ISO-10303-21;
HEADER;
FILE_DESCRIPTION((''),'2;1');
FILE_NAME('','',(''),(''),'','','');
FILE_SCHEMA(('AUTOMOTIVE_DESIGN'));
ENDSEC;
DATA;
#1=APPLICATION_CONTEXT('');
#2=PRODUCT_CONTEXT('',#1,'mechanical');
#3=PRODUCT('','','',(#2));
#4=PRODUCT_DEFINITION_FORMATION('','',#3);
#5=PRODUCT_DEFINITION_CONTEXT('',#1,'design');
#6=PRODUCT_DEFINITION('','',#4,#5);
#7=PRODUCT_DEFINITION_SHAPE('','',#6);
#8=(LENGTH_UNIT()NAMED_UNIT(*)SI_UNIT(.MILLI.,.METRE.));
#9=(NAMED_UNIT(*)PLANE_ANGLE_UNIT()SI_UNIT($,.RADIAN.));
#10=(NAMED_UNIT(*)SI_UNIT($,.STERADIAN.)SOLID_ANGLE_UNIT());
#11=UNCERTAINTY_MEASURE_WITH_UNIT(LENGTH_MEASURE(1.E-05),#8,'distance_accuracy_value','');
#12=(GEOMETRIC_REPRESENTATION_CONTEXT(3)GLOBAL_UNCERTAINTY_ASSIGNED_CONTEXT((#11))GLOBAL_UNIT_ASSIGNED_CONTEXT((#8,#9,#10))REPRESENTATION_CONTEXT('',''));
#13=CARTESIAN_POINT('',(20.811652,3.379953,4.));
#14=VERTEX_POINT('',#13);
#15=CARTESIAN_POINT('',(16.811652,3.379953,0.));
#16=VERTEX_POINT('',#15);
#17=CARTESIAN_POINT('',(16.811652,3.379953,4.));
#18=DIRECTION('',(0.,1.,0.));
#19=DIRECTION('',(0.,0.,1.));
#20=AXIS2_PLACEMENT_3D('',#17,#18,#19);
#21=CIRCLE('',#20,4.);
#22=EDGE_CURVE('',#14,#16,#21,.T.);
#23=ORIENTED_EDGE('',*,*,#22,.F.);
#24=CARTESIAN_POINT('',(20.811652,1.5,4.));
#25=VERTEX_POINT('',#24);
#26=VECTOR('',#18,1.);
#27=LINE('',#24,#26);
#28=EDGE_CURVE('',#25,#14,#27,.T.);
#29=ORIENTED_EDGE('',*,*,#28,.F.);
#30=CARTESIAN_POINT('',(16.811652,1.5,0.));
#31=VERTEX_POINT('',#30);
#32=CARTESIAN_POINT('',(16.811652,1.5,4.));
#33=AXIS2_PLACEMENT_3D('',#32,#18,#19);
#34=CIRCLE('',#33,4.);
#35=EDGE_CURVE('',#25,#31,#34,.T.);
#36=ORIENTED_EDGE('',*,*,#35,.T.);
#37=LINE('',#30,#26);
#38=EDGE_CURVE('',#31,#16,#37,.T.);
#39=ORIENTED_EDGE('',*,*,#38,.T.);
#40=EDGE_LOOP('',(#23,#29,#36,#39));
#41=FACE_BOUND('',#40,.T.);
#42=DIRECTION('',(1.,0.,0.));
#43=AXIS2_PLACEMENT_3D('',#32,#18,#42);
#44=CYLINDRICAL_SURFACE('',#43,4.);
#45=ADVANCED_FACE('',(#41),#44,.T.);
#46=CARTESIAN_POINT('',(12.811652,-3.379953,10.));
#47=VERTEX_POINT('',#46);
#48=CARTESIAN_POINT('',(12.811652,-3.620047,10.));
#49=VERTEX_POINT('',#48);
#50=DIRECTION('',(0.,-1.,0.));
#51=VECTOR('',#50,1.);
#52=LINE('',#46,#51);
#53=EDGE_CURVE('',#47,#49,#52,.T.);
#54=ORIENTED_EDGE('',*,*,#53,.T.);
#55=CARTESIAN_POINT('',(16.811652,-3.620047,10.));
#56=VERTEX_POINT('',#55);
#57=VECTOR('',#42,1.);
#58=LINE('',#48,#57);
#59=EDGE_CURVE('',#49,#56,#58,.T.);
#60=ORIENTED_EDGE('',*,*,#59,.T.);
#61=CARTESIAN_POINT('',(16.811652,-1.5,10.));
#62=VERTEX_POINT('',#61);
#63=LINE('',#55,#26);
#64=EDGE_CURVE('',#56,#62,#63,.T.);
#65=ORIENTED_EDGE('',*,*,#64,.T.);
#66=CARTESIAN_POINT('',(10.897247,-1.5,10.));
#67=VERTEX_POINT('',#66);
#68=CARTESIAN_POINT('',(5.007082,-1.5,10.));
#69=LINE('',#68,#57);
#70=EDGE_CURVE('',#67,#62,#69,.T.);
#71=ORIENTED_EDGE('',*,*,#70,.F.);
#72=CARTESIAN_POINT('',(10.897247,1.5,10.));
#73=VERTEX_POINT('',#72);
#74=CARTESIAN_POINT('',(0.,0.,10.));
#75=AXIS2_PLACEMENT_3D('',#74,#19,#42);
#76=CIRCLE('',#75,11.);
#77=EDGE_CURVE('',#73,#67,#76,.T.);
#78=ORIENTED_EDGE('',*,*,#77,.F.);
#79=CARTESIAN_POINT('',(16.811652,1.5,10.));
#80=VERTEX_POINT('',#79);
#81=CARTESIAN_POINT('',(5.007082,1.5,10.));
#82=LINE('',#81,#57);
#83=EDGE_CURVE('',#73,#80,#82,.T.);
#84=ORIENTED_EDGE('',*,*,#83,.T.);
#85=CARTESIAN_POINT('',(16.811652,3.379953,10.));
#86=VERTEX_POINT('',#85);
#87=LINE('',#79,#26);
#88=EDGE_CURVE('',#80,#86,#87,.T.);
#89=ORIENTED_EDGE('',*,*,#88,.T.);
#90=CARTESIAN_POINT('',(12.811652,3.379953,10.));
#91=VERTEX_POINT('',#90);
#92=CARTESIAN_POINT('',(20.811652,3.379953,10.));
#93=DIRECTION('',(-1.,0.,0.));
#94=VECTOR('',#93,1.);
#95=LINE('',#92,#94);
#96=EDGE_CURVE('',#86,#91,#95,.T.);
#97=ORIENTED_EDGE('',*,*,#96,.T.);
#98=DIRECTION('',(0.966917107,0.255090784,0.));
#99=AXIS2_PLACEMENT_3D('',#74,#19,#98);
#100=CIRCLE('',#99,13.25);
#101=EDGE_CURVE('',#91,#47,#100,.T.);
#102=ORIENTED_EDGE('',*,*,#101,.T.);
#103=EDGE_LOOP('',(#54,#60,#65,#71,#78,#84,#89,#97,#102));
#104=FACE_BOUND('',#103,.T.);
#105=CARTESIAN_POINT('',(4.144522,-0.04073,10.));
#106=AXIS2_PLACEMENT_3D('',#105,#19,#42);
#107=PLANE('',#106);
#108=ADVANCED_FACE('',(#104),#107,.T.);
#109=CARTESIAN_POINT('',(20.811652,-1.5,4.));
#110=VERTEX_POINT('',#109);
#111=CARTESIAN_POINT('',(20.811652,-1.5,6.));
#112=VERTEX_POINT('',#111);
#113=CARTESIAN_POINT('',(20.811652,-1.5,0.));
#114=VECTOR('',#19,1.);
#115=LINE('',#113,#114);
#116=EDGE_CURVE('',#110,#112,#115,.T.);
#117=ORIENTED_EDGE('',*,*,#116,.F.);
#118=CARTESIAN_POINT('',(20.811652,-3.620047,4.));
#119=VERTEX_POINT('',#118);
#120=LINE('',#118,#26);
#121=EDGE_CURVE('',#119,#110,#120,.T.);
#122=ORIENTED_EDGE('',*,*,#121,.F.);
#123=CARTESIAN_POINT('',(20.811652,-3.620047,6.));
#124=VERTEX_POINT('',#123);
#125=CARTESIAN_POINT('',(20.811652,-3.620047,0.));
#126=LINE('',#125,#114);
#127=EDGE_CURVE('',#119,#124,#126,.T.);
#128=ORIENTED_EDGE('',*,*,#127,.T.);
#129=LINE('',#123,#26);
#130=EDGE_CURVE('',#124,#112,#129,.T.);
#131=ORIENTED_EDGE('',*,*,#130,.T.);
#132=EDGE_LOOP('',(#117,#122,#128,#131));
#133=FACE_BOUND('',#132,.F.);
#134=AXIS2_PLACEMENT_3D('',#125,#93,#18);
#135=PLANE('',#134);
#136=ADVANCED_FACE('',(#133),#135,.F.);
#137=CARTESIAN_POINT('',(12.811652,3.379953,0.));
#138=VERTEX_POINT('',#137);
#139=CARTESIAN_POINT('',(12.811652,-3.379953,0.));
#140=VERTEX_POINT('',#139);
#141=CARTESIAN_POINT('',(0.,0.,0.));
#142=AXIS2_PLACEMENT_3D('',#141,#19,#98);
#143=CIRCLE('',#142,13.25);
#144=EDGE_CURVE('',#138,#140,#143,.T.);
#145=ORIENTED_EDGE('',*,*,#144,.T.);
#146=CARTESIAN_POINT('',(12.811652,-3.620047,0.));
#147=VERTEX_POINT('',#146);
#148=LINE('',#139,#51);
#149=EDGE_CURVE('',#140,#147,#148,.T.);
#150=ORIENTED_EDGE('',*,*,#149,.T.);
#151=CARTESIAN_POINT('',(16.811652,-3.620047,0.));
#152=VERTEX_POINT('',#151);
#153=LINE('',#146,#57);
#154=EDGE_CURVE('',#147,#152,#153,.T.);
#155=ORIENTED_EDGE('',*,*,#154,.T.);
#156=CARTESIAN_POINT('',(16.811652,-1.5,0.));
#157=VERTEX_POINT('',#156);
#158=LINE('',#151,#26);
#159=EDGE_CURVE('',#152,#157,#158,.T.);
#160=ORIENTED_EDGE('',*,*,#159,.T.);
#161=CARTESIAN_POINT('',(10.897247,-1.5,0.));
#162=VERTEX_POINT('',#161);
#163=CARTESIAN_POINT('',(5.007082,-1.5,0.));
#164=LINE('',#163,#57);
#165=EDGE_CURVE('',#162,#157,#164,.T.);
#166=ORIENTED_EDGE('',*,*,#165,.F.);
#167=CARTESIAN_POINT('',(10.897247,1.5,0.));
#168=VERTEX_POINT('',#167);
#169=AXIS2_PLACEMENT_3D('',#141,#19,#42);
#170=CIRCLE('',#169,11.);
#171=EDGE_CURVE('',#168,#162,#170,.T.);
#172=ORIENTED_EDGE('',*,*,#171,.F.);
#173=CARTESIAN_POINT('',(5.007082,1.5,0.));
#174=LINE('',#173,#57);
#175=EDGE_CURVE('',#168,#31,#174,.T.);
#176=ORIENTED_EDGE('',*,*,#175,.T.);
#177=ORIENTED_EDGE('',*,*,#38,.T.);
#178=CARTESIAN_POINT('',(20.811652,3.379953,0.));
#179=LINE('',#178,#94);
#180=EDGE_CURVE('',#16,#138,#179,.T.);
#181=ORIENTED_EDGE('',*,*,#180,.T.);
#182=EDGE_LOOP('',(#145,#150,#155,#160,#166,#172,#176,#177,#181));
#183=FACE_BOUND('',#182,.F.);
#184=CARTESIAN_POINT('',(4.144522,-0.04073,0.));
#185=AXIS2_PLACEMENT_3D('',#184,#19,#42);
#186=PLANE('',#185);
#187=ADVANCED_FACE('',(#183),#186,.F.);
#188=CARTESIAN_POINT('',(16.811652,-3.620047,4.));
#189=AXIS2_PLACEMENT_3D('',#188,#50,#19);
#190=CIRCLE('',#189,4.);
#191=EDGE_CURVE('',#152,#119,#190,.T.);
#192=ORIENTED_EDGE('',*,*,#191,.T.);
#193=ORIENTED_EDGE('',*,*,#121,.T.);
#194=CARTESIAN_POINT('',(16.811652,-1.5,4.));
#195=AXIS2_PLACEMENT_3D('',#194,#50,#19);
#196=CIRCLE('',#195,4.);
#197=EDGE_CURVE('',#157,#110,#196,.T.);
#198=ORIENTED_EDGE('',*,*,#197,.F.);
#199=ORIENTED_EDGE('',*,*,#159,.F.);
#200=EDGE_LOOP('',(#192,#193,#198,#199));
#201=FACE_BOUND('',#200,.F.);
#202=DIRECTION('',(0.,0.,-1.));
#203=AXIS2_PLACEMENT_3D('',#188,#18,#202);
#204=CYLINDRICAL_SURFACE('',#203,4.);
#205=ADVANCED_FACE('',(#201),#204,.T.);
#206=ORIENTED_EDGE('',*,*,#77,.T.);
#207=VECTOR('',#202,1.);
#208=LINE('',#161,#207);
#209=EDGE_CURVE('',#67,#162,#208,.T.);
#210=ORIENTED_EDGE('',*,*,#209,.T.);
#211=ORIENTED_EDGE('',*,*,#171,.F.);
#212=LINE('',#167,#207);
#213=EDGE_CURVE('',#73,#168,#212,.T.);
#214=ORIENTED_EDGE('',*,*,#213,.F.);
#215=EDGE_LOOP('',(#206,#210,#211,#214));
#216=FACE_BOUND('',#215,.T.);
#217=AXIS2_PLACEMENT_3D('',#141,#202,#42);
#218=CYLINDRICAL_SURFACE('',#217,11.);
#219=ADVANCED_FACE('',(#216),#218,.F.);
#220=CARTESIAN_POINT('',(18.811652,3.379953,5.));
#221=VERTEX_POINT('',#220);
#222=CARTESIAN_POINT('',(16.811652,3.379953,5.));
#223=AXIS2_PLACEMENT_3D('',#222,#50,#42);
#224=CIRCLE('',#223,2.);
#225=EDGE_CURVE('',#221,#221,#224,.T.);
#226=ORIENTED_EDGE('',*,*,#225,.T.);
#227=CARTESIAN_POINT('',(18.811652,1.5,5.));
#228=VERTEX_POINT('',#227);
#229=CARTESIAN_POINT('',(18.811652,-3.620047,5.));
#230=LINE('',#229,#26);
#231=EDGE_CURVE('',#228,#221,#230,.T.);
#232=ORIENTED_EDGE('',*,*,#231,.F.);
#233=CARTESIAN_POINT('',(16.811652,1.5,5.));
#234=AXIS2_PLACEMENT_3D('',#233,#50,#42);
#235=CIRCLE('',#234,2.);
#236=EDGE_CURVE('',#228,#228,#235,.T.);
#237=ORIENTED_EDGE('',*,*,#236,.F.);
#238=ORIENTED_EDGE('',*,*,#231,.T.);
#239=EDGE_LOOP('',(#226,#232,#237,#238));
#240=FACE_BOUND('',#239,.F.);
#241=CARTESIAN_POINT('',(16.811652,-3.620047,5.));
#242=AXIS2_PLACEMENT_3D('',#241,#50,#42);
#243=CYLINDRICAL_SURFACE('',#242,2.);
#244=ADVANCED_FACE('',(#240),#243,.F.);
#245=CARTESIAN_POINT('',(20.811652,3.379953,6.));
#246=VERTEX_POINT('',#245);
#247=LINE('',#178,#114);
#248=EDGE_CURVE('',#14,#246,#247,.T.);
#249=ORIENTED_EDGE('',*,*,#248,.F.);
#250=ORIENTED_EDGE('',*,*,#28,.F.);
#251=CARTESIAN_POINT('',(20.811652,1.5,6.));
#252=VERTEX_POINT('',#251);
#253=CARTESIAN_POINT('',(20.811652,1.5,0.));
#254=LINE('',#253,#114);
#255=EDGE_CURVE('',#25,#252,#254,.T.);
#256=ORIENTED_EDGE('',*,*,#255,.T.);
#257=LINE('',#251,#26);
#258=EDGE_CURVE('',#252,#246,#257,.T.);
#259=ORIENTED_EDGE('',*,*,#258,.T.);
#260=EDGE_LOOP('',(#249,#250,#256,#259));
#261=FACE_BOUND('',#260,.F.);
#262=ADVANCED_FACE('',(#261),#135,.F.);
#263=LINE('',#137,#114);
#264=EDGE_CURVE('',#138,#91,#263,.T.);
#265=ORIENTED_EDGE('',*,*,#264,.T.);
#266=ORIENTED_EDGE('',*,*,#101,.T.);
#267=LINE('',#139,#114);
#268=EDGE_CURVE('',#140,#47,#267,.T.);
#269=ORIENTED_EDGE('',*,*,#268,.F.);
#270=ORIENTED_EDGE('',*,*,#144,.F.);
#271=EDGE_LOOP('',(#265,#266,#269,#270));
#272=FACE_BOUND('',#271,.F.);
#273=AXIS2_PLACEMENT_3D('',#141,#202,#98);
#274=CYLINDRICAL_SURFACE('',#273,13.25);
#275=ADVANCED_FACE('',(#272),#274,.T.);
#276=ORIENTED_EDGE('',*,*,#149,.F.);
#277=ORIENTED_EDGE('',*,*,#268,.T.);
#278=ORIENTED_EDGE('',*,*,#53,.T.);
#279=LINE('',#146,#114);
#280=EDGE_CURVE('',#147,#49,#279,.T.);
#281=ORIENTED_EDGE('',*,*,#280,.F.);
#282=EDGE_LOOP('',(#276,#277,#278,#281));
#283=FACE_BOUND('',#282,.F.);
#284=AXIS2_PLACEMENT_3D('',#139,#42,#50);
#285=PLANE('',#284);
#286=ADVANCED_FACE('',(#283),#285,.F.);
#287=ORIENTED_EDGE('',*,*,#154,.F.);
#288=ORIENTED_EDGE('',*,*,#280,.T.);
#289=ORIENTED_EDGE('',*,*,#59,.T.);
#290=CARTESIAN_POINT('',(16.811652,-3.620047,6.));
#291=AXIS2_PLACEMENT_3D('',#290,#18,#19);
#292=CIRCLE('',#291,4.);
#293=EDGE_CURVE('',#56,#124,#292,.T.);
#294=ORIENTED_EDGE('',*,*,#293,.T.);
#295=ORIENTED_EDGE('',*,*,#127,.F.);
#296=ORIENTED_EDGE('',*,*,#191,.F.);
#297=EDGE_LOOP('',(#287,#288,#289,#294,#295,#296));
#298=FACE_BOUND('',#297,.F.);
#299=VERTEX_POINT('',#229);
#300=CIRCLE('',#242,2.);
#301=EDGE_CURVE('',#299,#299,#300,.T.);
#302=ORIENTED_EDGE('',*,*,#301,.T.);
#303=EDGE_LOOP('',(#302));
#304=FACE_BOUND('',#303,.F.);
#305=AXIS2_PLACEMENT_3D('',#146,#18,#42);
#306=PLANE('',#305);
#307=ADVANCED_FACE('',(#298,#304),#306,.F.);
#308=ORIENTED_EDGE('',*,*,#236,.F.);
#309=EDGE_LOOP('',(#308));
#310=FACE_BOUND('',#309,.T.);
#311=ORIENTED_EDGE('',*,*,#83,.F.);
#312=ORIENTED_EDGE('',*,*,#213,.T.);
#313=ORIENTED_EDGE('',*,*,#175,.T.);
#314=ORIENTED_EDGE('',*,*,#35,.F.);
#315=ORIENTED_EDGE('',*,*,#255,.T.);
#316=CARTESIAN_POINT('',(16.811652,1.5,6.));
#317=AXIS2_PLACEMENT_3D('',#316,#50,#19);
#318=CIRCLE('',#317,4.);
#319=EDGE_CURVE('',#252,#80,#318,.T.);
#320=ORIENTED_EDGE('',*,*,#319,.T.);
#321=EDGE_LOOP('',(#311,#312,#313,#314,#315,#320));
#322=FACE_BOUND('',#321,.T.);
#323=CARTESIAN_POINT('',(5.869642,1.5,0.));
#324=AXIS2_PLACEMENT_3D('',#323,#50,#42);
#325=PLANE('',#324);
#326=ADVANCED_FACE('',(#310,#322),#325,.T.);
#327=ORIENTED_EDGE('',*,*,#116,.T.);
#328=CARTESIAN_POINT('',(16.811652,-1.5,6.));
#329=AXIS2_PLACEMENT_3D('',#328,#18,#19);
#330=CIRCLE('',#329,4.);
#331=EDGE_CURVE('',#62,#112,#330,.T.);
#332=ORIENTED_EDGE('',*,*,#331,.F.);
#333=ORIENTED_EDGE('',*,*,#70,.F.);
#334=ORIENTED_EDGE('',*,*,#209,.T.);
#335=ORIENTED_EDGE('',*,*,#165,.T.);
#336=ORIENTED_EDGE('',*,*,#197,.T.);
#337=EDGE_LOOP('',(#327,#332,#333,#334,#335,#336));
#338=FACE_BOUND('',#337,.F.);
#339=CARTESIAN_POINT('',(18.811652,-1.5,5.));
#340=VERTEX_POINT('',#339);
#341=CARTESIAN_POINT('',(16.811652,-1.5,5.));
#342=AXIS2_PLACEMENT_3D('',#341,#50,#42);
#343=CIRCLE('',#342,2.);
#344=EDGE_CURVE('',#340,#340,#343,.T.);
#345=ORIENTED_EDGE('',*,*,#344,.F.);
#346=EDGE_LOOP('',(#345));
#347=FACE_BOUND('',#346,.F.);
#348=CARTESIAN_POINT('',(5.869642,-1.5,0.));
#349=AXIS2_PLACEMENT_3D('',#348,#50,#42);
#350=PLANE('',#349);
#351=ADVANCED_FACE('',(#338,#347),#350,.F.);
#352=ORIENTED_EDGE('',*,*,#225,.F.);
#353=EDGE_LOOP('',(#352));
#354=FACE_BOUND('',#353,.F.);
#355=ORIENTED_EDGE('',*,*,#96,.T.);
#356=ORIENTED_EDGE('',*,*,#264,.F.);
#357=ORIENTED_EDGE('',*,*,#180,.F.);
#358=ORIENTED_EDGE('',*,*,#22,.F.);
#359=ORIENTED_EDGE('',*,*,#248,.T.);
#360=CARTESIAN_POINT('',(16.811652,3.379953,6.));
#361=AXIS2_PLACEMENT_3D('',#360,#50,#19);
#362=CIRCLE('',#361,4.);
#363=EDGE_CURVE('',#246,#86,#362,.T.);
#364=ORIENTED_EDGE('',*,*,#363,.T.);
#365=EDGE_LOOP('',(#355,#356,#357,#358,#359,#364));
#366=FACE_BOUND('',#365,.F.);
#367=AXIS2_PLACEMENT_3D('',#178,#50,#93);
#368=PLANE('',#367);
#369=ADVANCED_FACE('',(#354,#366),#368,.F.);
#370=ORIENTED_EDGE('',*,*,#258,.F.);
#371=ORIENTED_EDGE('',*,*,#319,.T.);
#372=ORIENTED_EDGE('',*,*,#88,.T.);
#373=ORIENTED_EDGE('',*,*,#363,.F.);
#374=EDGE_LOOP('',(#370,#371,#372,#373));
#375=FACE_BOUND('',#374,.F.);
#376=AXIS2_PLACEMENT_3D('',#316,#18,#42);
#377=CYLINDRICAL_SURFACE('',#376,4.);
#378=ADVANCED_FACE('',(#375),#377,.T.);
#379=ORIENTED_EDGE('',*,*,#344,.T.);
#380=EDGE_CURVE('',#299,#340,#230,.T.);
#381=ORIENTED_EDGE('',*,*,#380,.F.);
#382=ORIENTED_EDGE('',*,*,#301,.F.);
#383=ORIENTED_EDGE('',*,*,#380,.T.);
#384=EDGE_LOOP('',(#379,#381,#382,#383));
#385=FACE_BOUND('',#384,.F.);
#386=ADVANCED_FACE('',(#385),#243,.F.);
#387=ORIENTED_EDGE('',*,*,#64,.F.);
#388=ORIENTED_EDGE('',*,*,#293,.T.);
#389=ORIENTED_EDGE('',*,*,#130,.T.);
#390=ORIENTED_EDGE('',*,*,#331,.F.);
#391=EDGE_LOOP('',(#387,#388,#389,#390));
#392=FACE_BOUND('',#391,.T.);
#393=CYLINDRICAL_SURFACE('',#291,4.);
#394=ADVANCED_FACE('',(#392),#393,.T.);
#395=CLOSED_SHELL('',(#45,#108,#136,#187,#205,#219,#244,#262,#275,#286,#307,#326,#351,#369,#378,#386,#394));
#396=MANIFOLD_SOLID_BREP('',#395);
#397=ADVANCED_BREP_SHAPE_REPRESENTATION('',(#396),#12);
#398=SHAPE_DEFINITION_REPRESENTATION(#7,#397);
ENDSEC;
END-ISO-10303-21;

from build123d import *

# Parameters (mm, degrees)
F0_R     = 11
F1_DEPTH = 10
F2_W     = 26.7762894586
F2_H     = 3
F3_DEPTH = 11.5
F4_R     = 2
F5_DEPTH = 25
F6_R     = 4


# Not quite as in the source:
# - a feature names something its author has since deleted; it is built from what else it names


with BuildPart() as f1:
    # F0 (on Top) → F1 (new body)
    with BuildSketch(Plane.XY):
        with BuildLine():
            Line((20.8116516682, 3.3799528892), (12.8116516682, 3.3799528892))
            ThreePointArc((12.8116516682, 3.3799528892), (-13.25, 0), (12.8116516682, -3.3799528892))
            Line((12.8116516682, -3.3799528892), (12.8116516682, -3.6200471108))
            Line((12.8116516682, -3.6200471108), (20.8116516682, -3.6200471108))
            Line((20.8116516682, -3.6200471108), (20.8116516682, 3.3799528892))
        make_face()
        Circle(F0_R, mode=Mode.SUBTRACT)
    extrude(amount=F1_DEPTH)

    # F2 (on Top) → F3 (cut, symmetric)
    with BuildSketch(Plane.XY):
        with Locations((19.2577867381, 0)):
            Rectangle(F2_W, F2_H)
    extrude(amount=F3_DEPTH, both=True, mode=Mode.SUBTRACT)

    # F4 (on face) → F5 (cut)
    with BuildSketch(Plane.XZ.offset(3.6200471108)):
        with Locations((16.8116516682, 5)):
            Circle(F4_R)
    extrude(amount=-F5_DEPTH, mode=Mode.SUBTRACT)

    # F6
    f6_edges = [f1.edges().sort_by_distance(p)[0] for p in [
        (20.811652, -2.560024, 10),
        (20.811652, 2.439976, 10),
        (20.811652, 2.439976, 0),
        (20.811652, -2.560024, 0),
    ]]
    fillet(f6_edges, radius=F6_R)


solid = f1.part
